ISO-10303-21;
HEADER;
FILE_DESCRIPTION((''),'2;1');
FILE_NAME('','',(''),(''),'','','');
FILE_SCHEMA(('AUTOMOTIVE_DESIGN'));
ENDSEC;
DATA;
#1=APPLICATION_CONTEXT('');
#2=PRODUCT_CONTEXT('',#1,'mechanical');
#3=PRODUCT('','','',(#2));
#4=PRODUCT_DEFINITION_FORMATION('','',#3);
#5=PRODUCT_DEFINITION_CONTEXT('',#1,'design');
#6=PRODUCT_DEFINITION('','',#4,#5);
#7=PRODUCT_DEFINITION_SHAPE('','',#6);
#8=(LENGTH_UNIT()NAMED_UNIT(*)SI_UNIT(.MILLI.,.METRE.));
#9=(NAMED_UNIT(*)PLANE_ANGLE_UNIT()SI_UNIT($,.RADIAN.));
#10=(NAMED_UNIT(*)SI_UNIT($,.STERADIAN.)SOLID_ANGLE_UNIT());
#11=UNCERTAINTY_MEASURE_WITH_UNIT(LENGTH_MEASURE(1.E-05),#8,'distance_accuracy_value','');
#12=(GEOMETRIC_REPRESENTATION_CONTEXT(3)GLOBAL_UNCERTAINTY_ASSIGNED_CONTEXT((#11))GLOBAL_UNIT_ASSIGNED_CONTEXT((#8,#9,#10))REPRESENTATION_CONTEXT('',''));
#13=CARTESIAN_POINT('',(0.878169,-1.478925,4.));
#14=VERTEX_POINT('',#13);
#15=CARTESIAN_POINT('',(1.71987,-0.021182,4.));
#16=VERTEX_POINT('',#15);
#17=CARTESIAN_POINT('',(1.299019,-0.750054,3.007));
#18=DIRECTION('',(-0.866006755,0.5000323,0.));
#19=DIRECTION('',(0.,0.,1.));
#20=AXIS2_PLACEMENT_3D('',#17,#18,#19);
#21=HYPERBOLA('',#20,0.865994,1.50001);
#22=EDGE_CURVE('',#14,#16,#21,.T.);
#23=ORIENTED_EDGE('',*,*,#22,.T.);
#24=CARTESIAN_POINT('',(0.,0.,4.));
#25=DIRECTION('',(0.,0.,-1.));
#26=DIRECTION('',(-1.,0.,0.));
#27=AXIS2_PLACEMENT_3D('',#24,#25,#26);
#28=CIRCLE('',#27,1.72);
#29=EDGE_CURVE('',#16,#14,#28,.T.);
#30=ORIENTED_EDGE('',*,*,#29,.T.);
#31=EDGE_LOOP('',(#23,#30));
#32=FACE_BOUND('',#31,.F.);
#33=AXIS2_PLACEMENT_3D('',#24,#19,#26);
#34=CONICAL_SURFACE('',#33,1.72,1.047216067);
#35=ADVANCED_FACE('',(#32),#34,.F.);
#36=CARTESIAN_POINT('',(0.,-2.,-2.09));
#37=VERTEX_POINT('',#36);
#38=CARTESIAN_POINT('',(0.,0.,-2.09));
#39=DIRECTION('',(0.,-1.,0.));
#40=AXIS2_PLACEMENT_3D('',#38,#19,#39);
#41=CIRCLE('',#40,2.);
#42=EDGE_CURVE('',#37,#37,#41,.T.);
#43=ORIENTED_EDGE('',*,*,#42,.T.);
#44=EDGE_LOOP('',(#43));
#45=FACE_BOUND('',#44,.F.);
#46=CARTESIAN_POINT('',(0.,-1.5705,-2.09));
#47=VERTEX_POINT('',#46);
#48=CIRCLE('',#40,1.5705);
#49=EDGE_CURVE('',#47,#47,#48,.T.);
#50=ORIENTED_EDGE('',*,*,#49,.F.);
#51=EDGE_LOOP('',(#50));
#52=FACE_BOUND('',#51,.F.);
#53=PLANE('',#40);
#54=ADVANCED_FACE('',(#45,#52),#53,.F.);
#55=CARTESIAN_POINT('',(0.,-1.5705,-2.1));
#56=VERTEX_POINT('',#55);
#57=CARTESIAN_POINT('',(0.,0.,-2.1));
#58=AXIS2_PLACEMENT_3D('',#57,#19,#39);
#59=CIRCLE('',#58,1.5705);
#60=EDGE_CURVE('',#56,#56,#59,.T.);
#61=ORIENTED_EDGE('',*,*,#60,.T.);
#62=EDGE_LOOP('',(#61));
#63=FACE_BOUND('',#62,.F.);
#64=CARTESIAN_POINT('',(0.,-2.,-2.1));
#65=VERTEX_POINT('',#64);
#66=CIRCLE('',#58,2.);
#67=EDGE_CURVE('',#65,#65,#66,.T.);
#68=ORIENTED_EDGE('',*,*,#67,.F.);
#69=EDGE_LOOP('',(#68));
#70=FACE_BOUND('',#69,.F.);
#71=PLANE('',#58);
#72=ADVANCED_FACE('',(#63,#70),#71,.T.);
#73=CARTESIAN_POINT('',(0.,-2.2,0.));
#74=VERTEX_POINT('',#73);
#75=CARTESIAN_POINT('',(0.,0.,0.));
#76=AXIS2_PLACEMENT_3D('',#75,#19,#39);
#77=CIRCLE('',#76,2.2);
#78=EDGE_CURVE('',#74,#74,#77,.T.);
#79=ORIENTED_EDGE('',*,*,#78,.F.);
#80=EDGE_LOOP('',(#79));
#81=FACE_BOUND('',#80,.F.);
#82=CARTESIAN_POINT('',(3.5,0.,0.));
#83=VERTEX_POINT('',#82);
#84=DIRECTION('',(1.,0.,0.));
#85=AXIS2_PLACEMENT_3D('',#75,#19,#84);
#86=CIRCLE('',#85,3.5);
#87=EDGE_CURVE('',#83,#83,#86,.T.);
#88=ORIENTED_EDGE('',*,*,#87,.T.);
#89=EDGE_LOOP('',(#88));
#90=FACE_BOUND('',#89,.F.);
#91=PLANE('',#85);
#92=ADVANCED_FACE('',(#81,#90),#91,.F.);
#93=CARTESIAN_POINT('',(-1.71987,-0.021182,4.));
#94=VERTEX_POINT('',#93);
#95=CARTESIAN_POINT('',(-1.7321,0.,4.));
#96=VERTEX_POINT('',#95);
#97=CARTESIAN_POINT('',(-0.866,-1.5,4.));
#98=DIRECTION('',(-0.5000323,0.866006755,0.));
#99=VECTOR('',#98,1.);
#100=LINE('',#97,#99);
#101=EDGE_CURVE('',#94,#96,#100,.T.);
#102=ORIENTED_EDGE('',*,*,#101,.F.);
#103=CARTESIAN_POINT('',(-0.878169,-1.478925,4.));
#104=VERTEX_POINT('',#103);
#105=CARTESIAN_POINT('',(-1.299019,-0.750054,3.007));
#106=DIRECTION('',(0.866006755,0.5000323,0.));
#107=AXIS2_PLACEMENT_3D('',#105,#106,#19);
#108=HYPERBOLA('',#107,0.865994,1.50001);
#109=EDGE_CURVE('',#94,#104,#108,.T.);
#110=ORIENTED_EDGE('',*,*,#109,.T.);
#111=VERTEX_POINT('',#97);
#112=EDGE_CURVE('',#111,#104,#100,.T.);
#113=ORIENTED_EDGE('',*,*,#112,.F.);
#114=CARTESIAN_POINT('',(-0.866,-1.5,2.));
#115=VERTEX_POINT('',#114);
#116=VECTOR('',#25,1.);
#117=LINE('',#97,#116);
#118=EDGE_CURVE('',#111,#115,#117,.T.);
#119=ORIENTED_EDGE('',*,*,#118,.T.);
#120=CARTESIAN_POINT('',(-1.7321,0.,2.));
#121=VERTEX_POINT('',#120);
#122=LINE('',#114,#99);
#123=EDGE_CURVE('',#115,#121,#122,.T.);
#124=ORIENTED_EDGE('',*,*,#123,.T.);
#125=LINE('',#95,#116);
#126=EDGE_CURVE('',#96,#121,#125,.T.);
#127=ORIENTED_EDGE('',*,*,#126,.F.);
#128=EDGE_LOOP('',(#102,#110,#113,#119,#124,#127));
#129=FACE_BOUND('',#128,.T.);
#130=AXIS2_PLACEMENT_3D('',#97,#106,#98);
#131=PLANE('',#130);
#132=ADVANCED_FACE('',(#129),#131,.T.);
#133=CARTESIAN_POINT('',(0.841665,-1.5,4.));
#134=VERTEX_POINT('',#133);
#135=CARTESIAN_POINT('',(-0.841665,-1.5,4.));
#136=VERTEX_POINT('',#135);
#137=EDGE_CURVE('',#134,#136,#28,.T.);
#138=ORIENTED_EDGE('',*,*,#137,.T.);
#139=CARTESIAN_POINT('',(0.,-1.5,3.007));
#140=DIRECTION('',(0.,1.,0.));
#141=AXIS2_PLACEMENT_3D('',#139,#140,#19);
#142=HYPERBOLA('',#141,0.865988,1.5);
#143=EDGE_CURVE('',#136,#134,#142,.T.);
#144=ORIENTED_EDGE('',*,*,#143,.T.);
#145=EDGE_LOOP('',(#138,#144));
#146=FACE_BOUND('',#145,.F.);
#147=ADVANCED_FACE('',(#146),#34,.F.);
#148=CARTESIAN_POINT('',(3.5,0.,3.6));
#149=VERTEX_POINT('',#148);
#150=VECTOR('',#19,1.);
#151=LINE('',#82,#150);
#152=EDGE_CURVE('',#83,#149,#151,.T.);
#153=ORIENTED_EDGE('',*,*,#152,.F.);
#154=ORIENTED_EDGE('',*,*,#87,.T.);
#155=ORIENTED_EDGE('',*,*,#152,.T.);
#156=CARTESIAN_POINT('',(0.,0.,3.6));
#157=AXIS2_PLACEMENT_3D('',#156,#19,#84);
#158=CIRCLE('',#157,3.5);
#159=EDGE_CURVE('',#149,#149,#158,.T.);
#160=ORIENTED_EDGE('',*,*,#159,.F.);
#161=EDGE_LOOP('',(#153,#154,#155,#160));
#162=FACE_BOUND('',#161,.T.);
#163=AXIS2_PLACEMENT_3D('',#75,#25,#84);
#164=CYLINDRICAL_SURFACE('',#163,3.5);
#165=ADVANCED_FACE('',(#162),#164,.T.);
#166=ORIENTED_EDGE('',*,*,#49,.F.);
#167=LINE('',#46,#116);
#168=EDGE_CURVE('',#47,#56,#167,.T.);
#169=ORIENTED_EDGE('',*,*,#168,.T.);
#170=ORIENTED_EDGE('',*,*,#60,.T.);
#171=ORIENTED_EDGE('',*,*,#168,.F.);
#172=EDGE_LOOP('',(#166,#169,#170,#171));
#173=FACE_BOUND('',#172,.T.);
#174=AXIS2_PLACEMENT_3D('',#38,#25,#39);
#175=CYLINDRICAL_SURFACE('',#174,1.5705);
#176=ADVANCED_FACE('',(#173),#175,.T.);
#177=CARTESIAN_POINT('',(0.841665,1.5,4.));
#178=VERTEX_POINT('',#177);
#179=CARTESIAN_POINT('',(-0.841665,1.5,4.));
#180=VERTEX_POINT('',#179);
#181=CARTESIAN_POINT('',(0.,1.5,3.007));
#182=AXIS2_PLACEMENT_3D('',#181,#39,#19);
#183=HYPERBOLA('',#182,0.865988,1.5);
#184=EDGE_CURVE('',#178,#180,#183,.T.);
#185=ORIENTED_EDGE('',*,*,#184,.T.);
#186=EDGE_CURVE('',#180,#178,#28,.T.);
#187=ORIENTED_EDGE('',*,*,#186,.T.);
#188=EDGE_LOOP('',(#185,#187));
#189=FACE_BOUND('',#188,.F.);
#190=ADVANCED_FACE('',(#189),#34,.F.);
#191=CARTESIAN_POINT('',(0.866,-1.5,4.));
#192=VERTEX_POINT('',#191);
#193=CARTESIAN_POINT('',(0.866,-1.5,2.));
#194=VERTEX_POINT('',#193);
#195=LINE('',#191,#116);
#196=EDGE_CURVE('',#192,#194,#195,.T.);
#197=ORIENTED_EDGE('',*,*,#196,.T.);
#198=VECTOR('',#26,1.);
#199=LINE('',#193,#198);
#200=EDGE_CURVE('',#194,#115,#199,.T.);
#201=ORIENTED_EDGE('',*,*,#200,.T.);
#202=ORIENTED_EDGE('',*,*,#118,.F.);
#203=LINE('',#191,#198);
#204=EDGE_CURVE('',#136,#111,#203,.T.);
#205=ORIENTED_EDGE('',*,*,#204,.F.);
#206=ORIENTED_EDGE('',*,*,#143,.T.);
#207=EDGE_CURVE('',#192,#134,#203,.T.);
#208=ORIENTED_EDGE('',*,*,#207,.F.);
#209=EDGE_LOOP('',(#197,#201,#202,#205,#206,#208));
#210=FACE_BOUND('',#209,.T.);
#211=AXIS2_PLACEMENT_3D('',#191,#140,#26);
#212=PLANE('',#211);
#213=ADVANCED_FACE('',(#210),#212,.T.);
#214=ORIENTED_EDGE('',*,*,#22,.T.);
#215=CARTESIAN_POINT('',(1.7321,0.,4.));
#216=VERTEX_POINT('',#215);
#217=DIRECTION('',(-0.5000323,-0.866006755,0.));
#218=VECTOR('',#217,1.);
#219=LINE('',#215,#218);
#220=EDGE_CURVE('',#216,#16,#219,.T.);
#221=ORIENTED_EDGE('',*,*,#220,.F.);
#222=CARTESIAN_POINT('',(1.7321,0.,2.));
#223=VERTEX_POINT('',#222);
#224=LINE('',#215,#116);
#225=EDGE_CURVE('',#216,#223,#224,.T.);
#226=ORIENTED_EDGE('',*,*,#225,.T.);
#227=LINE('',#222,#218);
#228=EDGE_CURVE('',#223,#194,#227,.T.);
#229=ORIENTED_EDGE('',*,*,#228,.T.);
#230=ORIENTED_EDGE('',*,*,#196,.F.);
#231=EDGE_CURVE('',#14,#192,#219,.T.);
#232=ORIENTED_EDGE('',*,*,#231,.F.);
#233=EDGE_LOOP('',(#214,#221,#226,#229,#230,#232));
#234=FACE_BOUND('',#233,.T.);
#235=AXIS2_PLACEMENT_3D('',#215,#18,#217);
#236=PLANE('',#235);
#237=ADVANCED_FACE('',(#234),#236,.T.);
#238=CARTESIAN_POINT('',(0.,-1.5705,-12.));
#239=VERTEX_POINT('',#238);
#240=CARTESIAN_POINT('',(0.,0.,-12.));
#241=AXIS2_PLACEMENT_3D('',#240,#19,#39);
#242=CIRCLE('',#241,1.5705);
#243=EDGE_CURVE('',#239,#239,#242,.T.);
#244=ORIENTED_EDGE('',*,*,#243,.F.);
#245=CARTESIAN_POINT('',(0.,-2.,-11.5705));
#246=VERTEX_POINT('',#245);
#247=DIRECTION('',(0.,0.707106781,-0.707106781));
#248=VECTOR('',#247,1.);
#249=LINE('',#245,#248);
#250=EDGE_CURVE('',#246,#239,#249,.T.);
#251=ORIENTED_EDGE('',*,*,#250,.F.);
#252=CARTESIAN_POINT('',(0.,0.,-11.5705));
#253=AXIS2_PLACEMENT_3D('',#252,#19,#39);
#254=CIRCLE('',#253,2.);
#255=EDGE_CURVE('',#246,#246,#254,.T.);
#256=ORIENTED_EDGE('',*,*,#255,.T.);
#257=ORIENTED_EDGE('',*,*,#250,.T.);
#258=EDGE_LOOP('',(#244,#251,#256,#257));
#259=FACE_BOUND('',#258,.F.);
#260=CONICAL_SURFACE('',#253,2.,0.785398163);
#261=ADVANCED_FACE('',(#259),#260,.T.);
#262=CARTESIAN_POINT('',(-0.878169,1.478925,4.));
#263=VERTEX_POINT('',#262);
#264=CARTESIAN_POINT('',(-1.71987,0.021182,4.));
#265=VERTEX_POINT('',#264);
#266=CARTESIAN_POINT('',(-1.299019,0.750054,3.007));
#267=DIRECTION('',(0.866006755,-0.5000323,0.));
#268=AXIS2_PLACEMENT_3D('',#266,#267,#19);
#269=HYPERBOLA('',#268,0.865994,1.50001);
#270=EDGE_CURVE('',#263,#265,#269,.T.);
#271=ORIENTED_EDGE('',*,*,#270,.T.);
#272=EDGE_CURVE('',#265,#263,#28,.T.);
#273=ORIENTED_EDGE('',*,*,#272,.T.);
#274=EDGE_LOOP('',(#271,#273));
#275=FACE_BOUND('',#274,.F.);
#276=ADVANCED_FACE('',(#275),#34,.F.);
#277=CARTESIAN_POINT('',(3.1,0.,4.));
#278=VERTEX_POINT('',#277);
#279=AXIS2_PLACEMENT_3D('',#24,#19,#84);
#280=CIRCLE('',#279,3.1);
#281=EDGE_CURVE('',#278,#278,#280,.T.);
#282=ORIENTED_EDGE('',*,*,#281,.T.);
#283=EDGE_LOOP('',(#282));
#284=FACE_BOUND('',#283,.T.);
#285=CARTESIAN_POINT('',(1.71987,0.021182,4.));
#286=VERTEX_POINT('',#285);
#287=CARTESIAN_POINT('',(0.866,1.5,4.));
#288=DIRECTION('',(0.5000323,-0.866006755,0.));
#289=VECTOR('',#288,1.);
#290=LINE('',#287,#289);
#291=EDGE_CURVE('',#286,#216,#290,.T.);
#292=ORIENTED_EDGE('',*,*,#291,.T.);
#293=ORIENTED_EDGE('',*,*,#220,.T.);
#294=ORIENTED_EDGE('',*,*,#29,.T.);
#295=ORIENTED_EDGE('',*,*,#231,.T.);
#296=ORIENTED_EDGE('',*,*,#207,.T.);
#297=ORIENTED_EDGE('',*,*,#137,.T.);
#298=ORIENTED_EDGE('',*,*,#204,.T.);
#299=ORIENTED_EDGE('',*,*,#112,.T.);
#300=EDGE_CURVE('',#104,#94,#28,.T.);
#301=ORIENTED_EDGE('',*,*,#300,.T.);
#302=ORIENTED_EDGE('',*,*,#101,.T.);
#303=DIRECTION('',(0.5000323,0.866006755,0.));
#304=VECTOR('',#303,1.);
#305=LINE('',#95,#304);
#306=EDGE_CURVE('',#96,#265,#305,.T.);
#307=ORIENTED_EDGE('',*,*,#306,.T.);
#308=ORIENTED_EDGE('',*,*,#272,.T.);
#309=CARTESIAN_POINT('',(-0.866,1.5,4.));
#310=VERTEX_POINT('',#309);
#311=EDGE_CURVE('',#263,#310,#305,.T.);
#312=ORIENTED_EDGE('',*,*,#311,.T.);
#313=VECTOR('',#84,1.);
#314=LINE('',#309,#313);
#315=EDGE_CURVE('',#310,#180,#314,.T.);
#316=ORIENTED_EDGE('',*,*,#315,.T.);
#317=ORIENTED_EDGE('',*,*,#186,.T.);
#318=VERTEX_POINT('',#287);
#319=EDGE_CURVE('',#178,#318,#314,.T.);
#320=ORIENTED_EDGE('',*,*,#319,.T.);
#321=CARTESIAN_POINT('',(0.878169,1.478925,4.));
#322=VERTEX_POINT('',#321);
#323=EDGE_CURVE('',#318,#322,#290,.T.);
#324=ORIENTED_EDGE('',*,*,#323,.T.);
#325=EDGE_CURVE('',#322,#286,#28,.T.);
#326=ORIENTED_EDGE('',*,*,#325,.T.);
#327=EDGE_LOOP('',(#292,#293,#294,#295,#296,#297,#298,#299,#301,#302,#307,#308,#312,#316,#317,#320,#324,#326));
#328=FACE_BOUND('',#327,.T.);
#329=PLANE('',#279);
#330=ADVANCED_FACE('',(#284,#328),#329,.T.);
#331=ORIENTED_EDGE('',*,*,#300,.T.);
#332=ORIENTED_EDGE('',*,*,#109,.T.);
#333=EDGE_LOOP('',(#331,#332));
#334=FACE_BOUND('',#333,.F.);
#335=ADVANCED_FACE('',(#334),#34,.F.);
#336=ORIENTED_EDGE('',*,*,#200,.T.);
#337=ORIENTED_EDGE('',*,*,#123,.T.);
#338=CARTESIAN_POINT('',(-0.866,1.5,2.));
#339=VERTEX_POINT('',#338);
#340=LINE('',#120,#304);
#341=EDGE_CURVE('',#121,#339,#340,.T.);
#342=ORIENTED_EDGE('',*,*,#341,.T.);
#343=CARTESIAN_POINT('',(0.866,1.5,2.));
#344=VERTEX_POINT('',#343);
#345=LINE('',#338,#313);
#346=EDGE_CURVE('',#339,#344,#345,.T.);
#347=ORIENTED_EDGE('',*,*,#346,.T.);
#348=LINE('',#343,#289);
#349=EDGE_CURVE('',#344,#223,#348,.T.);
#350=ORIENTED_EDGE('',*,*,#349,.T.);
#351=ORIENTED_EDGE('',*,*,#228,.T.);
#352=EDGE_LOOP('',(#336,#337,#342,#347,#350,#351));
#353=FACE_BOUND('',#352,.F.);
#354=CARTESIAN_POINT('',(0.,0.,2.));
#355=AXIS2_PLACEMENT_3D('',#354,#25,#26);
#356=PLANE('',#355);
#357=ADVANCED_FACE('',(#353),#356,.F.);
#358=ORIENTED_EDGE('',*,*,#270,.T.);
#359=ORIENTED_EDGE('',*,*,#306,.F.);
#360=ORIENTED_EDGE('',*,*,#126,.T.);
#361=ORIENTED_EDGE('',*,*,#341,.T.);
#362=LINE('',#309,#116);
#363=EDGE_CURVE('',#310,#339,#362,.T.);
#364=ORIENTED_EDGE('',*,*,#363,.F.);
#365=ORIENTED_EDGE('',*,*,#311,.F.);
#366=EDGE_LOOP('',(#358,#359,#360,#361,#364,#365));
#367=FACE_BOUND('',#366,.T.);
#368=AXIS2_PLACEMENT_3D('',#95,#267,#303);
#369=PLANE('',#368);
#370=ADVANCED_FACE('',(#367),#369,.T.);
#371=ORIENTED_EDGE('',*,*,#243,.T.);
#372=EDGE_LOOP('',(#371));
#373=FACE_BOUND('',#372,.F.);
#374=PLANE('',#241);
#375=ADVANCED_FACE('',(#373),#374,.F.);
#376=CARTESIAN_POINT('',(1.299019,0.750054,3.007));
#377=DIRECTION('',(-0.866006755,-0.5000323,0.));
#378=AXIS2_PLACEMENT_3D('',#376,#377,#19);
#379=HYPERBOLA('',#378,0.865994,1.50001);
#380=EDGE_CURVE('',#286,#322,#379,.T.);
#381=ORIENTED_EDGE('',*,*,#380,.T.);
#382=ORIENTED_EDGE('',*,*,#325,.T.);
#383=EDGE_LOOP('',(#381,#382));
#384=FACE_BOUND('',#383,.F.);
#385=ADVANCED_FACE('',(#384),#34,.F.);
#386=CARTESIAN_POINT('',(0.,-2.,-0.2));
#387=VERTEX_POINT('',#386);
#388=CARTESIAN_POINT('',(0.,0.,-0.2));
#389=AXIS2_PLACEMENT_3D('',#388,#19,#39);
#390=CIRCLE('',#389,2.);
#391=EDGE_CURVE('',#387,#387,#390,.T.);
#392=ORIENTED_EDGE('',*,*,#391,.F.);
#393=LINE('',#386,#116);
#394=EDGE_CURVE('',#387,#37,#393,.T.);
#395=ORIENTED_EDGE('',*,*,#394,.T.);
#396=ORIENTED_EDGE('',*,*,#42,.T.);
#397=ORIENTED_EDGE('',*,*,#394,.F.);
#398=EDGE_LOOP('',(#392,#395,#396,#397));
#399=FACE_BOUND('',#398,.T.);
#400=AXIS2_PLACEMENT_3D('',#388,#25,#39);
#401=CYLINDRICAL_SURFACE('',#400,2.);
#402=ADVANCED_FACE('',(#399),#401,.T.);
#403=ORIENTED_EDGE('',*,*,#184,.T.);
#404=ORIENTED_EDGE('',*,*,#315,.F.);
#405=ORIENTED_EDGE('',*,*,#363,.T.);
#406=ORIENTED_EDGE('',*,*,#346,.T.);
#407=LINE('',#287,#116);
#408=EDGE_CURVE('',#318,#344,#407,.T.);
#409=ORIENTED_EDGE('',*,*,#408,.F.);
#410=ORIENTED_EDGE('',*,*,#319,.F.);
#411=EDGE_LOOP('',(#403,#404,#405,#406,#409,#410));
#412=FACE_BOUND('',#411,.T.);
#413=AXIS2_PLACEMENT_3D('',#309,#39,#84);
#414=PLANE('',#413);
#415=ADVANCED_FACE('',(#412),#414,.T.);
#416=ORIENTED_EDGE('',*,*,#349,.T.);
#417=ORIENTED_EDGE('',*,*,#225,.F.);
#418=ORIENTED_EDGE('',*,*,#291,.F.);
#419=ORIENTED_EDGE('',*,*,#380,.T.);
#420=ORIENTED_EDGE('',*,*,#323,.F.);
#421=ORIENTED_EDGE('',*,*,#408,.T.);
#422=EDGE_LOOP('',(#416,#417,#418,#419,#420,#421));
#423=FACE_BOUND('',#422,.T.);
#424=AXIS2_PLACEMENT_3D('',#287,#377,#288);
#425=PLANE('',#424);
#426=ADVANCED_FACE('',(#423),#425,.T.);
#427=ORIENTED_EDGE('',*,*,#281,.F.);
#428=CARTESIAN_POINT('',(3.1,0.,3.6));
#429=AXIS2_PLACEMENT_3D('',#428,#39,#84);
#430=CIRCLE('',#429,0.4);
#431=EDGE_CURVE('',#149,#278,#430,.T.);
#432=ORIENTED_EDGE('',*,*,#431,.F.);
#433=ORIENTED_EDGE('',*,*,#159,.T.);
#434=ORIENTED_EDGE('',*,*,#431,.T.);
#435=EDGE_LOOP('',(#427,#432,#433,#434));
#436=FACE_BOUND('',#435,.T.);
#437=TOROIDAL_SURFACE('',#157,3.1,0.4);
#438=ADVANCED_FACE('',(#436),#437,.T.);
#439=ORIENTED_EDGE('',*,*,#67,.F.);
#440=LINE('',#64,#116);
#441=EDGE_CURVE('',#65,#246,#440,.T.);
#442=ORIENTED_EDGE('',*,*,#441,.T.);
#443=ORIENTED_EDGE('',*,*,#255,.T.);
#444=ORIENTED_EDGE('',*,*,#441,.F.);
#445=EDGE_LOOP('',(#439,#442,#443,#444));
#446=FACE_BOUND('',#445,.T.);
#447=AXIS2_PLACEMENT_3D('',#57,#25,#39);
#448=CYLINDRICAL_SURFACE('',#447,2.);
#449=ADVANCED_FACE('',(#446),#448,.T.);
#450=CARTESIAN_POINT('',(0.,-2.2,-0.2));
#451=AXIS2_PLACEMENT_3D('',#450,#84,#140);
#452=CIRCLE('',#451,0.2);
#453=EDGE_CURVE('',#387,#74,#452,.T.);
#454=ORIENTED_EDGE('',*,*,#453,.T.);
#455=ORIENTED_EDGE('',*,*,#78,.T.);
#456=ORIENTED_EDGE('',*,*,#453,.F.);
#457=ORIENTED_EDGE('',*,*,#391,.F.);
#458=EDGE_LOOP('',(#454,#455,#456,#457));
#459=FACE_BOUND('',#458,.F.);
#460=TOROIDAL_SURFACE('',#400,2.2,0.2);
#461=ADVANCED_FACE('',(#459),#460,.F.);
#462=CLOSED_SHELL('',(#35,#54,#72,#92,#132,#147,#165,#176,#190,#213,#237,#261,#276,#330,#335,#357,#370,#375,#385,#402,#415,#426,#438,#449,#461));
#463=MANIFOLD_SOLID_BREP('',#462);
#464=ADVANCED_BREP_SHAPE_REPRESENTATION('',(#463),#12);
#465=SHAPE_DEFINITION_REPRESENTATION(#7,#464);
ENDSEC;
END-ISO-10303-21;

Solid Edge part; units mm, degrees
sketch "Sketch1" plane through (0, 0, 0) normal (0, 0, 1) x (1, 0, 0)
  circle A0 centre (0, 0) radius 3.5
extrude "Protrusion1" add sketch "Sketch1" along normal blind 4
sketch "Sketch2" plane through (0, 0, 4) normal (0, 0, 1) x (0, 1, 0)
  line L0 (0, 1.7321) -> (1.5, 0.866)
  line L1 (1.5, 0.866) -> (1.5, -0.866)
  line L2 (1.5, -0.866) -> (0, -1.7321)
  line L3 (0, -1.7321) -> (-1.5, -0.866)
  line L4 (-1.5, -0.866) -> (-1.5, 0.866)
  line L5 (-1.5, 0.866) -> (0, 1.7321)
extrude "Cutout1" cut sketch "Sketch2" against normal blind 2
fillet "Round1" radius 0.4 1 edges at (-3.5, 0, 4)
sketch "Sketch3" plane through (0, 0, 0) normal (1, 0, 0) x (0, 1, 0)
  line L0 (-1.5705, -12) -> (0, -12)
  line L1 (-2, -11.5705) -> (-1.5705, -12)
  line L2 (-2, -2.1) -> (-2, -11.5705)
  line L3 (-1.5705, -2.1) -> (-2, -2.1)
  line L4 (-1.5705, -2.09) -> (-1.5705, -2.1)
  line L5 (-2, -2.09) -> (-1.5705, -2.09)
  line L6 (-2, -0.2) -> (-2, -2.09)
  arc A0 (-2, -0.2) -> (-2.2, 0) centre (-2.2, -0.2) ccw
  dimension "D1" = 2.1
  dimension "D2" = 0.01
  dimension "D3" = 0.2
  dimension "D4" = 12
revolve "RevolvedProtrusion1" add sketch "Sketch3" angle 360 about axis through (0, 0, -60.325) along (0, 0, 1) material side at (0, -0.7853, -11.95)
cosmetic_thread "Thread1" size "M4"
sketch "Sketch4" plane through (0, 0, 0) normal (0, -1, 0) x (1, 0, 0)
  line L0 (-1.72, 4) -> (0, 3.007)
revolve "RevolvedCutout1" cut sketch "Sketch4" angle 360 about axis through (0, 0, 57.15) along (0, 0, -1) material side at (-0.835, 0, 3.5468)
properties material "Stahl"
